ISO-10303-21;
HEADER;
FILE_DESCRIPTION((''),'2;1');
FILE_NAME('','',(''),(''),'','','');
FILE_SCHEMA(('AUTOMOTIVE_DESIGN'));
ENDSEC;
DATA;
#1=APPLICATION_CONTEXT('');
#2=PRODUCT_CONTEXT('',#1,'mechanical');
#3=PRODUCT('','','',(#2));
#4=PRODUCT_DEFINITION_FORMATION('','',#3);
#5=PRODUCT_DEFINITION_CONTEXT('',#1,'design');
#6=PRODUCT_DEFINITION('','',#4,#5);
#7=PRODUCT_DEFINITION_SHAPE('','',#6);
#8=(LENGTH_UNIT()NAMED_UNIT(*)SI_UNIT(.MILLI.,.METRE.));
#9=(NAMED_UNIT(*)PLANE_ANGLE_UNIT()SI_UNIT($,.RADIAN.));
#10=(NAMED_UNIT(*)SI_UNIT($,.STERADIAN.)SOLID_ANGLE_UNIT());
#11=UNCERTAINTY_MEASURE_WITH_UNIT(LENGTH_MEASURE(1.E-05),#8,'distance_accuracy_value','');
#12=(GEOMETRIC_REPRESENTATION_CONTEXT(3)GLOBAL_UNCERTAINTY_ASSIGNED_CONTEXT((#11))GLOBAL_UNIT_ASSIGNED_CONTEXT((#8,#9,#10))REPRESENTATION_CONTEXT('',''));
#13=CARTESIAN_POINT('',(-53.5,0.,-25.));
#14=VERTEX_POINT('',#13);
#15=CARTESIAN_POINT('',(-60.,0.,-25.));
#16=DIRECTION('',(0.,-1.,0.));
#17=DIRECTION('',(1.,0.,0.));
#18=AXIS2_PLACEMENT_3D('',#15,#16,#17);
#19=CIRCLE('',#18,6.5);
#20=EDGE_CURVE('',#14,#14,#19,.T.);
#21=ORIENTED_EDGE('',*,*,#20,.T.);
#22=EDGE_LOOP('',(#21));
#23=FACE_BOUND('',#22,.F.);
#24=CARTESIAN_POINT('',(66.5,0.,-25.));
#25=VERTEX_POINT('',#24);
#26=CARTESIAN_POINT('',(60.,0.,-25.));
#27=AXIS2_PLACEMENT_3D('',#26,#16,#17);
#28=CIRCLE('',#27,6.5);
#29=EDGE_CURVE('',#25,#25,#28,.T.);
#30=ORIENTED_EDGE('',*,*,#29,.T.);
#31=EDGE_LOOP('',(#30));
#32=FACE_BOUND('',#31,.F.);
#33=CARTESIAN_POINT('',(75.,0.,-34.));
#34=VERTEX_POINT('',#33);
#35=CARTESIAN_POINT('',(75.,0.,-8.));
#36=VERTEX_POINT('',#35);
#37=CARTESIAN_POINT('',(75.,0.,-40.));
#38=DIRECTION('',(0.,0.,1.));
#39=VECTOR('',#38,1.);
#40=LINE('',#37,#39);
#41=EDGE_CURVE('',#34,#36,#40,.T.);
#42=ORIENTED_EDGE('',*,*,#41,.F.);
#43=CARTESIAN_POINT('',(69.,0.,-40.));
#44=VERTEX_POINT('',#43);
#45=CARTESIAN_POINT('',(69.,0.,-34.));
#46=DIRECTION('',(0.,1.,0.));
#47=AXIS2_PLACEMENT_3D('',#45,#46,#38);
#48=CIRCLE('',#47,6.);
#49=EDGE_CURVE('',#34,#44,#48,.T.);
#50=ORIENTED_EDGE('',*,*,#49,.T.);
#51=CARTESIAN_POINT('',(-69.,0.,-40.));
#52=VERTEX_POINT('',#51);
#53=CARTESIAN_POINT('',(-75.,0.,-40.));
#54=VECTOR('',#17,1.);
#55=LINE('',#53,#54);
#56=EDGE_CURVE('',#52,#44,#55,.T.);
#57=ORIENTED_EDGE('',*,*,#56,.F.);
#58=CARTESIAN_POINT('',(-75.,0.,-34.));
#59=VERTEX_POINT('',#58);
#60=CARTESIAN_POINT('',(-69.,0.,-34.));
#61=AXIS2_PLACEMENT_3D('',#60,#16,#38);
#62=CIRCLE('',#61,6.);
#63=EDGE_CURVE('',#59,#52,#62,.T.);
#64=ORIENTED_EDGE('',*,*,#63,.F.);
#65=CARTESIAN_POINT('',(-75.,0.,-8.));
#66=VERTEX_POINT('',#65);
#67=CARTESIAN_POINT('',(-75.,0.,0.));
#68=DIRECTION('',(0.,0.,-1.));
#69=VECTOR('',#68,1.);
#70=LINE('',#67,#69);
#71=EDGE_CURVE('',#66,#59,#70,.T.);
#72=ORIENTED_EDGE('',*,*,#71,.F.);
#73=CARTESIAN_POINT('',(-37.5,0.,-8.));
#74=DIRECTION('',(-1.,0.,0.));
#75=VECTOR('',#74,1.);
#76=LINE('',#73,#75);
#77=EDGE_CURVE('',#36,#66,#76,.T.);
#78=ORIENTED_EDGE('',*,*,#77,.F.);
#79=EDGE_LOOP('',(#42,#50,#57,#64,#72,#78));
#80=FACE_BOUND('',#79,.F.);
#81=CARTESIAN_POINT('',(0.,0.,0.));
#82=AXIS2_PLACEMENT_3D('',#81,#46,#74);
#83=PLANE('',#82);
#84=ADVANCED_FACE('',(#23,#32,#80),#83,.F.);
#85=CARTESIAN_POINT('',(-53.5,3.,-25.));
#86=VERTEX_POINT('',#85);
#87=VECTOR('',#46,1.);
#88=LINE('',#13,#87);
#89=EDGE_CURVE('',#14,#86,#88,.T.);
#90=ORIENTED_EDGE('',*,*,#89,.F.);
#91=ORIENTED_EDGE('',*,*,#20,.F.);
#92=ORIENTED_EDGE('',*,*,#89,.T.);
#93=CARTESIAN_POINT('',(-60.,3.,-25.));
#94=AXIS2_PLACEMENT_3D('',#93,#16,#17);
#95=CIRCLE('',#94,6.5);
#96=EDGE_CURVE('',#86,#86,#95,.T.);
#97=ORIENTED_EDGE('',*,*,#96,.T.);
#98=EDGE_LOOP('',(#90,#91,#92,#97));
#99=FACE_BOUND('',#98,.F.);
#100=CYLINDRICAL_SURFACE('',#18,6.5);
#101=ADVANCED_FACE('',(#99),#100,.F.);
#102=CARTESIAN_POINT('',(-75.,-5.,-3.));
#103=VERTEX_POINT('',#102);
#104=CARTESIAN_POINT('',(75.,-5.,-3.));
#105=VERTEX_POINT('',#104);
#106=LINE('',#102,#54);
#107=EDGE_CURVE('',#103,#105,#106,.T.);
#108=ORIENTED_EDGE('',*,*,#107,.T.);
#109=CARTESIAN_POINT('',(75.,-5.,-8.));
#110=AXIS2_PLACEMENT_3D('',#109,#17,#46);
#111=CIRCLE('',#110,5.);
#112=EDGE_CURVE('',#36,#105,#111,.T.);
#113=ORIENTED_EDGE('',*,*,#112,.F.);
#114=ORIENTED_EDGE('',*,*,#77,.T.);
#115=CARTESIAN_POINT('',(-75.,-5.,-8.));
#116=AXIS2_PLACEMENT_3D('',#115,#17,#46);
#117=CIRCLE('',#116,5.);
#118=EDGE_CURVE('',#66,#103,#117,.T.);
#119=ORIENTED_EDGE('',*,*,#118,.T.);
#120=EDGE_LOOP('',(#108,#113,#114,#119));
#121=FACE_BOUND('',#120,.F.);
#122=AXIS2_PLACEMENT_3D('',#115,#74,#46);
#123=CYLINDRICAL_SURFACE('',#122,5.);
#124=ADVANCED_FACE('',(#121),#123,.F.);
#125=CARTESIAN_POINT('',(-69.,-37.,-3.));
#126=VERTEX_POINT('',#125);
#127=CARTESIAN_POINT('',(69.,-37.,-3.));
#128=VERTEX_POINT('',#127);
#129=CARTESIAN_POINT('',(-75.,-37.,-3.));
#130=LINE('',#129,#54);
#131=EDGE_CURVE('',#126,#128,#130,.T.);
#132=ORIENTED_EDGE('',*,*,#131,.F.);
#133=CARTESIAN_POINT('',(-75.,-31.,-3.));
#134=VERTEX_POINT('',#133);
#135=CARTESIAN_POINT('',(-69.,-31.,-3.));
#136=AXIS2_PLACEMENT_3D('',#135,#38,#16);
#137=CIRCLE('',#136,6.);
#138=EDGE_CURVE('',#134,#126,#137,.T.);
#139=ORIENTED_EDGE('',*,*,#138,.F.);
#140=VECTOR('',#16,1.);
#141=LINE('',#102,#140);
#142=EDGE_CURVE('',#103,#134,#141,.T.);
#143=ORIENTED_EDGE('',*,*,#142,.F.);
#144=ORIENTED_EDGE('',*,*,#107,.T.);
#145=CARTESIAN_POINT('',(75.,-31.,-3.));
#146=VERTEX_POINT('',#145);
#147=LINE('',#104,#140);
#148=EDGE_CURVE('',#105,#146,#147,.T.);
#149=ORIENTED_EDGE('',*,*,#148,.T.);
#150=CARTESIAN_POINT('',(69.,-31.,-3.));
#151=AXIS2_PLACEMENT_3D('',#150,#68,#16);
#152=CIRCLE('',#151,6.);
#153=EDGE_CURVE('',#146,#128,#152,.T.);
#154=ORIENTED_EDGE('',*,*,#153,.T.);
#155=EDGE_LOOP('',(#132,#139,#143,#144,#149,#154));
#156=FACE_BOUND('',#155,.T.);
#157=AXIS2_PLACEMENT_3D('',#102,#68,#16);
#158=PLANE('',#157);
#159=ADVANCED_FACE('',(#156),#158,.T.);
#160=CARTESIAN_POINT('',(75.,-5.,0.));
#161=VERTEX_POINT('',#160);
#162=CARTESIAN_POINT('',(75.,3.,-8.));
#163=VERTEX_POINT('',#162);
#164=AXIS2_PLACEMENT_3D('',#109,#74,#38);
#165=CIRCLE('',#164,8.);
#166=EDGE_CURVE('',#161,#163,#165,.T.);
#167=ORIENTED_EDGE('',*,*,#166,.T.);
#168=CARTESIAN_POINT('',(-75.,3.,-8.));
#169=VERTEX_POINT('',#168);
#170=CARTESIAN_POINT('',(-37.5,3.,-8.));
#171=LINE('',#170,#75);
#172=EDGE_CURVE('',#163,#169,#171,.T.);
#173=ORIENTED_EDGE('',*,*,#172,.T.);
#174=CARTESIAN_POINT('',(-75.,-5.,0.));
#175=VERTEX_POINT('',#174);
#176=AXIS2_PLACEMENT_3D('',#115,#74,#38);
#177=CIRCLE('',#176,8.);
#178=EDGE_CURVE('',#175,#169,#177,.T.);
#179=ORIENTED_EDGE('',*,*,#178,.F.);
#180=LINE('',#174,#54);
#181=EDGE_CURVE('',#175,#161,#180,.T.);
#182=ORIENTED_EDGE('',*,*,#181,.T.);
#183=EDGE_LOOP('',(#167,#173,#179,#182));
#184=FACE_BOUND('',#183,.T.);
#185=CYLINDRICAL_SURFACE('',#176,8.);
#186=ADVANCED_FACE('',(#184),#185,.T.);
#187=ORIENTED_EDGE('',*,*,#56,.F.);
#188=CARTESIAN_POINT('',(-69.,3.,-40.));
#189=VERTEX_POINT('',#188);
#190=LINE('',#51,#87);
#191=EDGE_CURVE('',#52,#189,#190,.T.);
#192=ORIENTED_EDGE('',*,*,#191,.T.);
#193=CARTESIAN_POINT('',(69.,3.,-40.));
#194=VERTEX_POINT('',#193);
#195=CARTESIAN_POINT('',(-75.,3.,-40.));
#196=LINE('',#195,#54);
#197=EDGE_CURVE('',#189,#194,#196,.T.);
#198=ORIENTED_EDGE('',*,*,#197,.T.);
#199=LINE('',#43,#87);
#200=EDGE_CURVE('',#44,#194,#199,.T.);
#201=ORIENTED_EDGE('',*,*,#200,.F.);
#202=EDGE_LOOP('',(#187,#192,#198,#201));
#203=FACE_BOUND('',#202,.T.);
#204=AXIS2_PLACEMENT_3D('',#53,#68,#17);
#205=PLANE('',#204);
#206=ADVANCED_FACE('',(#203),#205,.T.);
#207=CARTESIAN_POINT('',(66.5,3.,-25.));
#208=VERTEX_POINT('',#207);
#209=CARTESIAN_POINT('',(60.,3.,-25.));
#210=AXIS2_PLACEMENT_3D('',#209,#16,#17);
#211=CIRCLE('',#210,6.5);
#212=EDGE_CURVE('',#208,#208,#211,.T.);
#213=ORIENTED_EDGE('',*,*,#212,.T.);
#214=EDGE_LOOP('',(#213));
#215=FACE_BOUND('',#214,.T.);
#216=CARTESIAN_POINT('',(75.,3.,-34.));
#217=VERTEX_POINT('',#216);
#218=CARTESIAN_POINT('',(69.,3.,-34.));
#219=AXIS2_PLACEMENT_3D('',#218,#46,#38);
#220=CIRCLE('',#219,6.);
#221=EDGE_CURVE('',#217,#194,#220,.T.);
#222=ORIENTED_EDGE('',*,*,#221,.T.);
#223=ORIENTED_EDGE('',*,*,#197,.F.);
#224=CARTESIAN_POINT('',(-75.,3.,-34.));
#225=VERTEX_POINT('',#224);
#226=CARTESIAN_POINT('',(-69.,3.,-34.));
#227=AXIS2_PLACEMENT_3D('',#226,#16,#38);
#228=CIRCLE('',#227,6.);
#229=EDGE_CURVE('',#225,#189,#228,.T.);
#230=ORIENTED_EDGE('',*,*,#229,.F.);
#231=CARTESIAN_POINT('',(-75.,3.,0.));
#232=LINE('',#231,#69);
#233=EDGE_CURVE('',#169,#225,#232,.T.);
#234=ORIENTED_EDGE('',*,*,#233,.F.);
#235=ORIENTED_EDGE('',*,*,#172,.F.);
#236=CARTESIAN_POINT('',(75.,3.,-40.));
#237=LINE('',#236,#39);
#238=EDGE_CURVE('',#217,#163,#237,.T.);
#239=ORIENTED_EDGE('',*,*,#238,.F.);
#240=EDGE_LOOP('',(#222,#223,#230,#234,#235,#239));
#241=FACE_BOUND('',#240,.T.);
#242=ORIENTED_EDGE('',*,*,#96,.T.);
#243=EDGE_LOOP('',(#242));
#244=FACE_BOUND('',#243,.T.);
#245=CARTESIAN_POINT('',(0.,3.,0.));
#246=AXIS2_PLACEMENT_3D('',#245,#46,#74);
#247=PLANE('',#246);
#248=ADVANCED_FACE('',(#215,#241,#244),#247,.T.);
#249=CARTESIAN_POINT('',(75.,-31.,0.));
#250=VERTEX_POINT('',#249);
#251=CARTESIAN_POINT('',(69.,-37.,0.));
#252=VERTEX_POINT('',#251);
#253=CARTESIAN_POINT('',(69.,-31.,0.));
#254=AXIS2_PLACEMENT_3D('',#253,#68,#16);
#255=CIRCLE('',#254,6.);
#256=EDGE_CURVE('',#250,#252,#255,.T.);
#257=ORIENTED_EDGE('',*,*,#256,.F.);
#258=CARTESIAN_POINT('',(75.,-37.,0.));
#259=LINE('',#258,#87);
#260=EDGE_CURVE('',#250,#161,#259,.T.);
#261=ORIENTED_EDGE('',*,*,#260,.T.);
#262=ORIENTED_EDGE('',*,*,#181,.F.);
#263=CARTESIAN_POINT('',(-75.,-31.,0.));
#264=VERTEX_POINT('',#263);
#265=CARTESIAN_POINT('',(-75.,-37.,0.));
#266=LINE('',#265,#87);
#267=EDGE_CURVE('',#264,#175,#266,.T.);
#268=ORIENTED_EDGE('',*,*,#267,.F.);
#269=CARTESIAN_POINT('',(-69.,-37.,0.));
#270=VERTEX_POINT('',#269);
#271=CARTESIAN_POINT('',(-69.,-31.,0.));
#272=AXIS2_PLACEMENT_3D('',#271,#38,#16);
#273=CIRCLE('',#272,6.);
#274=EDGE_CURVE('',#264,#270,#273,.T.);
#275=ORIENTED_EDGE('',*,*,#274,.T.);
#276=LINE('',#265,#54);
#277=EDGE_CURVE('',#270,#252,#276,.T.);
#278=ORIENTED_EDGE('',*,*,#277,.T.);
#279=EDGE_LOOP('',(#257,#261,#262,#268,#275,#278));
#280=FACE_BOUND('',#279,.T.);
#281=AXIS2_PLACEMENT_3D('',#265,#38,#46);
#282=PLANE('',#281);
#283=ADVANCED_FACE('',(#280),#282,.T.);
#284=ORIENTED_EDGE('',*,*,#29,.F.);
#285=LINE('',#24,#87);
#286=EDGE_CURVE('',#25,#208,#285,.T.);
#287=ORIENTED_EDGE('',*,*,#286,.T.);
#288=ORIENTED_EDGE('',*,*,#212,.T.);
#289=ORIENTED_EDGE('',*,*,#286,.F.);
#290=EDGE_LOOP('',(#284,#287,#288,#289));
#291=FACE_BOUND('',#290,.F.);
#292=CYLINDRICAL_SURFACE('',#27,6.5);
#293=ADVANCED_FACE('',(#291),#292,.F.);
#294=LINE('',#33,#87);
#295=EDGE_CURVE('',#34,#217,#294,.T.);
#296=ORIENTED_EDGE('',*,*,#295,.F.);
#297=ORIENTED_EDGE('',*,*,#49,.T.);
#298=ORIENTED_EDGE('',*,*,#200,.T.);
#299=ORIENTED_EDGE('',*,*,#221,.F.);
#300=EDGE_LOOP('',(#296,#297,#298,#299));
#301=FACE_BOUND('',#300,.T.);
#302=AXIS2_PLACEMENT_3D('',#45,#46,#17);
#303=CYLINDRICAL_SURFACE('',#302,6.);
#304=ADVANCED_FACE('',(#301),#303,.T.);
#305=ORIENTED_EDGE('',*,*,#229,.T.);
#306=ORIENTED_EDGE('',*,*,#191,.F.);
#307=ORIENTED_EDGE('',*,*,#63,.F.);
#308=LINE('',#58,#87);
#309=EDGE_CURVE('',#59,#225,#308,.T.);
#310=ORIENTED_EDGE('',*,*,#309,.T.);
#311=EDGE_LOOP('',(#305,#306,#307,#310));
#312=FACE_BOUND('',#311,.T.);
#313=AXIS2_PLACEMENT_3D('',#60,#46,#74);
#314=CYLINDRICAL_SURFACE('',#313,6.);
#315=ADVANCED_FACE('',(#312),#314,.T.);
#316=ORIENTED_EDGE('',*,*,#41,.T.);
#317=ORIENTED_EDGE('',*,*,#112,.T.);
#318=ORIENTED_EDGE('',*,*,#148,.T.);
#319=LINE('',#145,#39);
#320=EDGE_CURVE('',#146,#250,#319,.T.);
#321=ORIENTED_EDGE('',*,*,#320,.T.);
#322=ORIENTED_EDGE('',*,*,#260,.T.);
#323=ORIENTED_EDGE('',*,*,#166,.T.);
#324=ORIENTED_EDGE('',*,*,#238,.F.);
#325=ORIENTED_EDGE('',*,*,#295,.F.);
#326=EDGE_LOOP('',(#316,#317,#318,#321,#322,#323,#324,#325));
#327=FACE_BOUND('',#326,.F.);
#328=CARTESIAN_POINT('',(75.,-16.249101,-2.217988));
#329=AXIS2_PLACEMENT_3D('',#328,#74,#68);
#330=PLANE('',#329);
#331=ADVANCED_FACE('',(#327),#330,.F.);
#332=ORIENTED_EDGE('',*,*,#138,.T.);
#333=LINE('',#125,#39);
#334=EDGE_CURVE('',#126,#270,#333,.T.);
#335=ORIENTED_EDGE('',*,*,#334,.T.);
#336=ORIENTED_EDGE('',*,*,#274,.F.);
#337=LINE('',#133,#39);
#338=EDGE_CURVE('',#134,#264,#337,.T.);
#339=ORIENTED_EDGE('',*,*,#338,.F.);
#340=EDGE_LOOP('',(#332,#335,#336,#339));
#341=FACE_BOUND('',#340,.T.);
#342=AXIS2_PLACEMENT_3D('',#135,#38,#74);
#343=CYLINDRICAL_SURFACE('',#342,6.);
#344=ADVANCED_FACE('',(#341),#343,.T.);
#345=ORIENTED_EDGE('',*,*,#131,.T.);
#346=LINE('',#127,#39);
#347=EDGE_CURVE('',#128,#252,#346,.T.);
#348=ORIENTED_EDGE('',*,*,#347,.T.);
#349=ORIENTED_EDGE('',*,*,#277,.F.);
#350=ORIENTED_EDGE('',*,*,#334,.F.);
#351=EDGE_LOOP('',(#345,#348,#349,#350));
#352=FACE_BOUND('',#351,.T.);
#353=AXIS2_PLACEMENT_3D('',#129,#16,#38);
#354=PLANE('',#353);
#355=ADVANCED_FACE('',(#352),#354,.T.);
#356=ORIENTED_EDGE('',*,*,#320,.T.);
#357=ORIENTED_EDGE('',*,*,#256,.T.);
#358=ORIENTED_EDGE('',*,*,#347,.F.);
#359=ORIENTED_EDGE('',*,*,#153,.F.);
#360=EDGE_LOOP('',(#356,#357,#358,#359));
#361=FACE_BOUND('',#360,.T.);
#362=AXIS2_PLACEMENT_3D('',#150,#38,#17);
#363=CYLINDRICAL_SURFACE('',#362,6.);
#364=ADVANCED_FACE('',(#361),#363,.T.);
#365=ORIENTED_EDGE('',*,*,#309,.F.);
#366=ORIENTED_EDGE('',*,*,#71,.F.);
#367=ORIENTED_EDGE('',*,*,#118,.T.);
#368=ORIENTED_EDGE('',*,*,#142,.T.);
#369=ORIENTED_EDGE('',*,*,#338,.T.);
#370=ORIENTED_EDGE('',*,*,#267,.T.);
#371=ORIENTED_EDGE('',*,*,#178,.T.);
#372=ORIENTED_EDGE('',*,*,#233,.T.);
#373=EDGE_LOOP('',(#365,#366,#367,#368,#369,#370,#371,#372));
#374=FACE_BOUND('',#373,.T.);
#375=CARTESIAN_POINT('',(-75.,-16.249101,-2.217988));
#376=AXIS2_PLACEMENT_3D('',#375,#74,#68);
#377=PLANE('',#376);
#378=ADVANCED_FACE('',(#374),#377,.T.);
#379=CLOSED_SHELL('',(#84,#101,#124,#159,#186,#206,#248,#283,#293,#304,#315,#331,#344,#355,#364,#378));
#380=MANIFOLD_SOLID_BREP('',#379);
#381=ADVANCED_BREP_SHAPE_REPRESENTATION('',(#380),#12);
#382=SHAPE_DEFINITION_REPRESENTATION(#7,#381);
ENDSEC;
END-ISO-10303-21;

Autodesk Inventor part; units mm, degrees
ref_plane "YZ Plane" through (0, 0, 0) normal (1, 0, 0) x (0, 1, 0)
ref_plane "XZ Plane" through (0, 0, 0) normal (0, 1, 0) x (-1, 0, 0)
ref_plane "XY Plane" through (0, 0, 0) normal (0, 0, 1) x (1, 0, 0)
sketch "Sketch4" plane through (0, 0, 0) normal (0, 1, 0) x (-1, 0, 0)
  line L0 (75, -40) -> (-75, -40)
  line L1 (-75, -40) -> (-75, 0)
  line L2 (-75, 0) -> (75, 0)
  line L3 (75, 0) -> (75, -40)
  point P0 (0, 0)
  point P1 (0, 0)
  dimension "d36" = 150
  dimension "d37" = 40
extrude "Plate2" add sketch "Sketch4" along normal blind 3
sketch "Sketch5" plane through (0, 0, 0) normal (0, -1, 0) x (1, 0, 0)
  circle A0 centre (-60, -25) radius 6.5
  circle A1 centre (60, -25) radius 6.5
  line L0 (0, 0) -> (0, -40) construction
  line L1 (75, -40) -> (-75, -40) construction
  dimension "d39" = 120
  dimension "d40" = 15
  dimension "d41" = 13
extrude "Cut1" cut sketch "Sketch5" against normal blind 3
sketch "Sketch6" plane through (-75, 3, -3) normal (0, 0, 1) x (1, 0, 0)
  line L0 (150, 0) -> (0, 0)
  line L1 (0, 0) -> (0, -40)
  line L2 (0, -40) -> (150, -40)
  line L3 (150, -40) -> (150, 0)
edge flange "Flange1" height 40 angle 90 thickness 3 bend radius 5 thickness toward (0, 0, 1) relief round relief width 3 relief depth 1.5 edges at (0, 0, 0) wall of the first edge with corners at (75, 3, -3) (-75, 3, -3) (-75, -37, -3) (75, -37, -3)
bend "Bend1"
corner "Corner1"
fillet "Corner Round6" radius 6 4 edges at (75, -37, -1.5) (-75, 1.5, -40) (75, 1.5, -40) (-75, -37, -1.5)
equation "\"d42\" = Thickness"
equation "\"d38\" = Thickness"
equation "\"d44\" = BendReliefWidth"
equation "\"d45\" = BendReliefDepth"
equation "\"d46\" = MinimumRemnant"
equation "\"d47\" = TransitionRadius"
equation "\"d50\" = BendRadius"
equation "\"d51\" = CornerReliefSize"
equation "\"d52\" = GapSize"
equation "\"d53\" = JacobiRadiusSize"
equation "\"BendReliefWidth\" = Thickness"
equation "\"BendReliefDepth\" = 0.5 * Thickness"
equation "\"CornerReliefSize\" = 4 * Thickness"
equation "\"MinimumRemnant\" = 2 * Thickness"
equation "\"TransitionRadius\" = BendRadius"
equation "\"JacobiRadiusSize\" = BendRadius"
equation "\"GapSize\" = Thickness"
equation "\"Thickness\" = 3"
equation "\"BendRadius\" = 5"
properties part number "NDM-VOS 712 flange" material "Stainless Steel"
